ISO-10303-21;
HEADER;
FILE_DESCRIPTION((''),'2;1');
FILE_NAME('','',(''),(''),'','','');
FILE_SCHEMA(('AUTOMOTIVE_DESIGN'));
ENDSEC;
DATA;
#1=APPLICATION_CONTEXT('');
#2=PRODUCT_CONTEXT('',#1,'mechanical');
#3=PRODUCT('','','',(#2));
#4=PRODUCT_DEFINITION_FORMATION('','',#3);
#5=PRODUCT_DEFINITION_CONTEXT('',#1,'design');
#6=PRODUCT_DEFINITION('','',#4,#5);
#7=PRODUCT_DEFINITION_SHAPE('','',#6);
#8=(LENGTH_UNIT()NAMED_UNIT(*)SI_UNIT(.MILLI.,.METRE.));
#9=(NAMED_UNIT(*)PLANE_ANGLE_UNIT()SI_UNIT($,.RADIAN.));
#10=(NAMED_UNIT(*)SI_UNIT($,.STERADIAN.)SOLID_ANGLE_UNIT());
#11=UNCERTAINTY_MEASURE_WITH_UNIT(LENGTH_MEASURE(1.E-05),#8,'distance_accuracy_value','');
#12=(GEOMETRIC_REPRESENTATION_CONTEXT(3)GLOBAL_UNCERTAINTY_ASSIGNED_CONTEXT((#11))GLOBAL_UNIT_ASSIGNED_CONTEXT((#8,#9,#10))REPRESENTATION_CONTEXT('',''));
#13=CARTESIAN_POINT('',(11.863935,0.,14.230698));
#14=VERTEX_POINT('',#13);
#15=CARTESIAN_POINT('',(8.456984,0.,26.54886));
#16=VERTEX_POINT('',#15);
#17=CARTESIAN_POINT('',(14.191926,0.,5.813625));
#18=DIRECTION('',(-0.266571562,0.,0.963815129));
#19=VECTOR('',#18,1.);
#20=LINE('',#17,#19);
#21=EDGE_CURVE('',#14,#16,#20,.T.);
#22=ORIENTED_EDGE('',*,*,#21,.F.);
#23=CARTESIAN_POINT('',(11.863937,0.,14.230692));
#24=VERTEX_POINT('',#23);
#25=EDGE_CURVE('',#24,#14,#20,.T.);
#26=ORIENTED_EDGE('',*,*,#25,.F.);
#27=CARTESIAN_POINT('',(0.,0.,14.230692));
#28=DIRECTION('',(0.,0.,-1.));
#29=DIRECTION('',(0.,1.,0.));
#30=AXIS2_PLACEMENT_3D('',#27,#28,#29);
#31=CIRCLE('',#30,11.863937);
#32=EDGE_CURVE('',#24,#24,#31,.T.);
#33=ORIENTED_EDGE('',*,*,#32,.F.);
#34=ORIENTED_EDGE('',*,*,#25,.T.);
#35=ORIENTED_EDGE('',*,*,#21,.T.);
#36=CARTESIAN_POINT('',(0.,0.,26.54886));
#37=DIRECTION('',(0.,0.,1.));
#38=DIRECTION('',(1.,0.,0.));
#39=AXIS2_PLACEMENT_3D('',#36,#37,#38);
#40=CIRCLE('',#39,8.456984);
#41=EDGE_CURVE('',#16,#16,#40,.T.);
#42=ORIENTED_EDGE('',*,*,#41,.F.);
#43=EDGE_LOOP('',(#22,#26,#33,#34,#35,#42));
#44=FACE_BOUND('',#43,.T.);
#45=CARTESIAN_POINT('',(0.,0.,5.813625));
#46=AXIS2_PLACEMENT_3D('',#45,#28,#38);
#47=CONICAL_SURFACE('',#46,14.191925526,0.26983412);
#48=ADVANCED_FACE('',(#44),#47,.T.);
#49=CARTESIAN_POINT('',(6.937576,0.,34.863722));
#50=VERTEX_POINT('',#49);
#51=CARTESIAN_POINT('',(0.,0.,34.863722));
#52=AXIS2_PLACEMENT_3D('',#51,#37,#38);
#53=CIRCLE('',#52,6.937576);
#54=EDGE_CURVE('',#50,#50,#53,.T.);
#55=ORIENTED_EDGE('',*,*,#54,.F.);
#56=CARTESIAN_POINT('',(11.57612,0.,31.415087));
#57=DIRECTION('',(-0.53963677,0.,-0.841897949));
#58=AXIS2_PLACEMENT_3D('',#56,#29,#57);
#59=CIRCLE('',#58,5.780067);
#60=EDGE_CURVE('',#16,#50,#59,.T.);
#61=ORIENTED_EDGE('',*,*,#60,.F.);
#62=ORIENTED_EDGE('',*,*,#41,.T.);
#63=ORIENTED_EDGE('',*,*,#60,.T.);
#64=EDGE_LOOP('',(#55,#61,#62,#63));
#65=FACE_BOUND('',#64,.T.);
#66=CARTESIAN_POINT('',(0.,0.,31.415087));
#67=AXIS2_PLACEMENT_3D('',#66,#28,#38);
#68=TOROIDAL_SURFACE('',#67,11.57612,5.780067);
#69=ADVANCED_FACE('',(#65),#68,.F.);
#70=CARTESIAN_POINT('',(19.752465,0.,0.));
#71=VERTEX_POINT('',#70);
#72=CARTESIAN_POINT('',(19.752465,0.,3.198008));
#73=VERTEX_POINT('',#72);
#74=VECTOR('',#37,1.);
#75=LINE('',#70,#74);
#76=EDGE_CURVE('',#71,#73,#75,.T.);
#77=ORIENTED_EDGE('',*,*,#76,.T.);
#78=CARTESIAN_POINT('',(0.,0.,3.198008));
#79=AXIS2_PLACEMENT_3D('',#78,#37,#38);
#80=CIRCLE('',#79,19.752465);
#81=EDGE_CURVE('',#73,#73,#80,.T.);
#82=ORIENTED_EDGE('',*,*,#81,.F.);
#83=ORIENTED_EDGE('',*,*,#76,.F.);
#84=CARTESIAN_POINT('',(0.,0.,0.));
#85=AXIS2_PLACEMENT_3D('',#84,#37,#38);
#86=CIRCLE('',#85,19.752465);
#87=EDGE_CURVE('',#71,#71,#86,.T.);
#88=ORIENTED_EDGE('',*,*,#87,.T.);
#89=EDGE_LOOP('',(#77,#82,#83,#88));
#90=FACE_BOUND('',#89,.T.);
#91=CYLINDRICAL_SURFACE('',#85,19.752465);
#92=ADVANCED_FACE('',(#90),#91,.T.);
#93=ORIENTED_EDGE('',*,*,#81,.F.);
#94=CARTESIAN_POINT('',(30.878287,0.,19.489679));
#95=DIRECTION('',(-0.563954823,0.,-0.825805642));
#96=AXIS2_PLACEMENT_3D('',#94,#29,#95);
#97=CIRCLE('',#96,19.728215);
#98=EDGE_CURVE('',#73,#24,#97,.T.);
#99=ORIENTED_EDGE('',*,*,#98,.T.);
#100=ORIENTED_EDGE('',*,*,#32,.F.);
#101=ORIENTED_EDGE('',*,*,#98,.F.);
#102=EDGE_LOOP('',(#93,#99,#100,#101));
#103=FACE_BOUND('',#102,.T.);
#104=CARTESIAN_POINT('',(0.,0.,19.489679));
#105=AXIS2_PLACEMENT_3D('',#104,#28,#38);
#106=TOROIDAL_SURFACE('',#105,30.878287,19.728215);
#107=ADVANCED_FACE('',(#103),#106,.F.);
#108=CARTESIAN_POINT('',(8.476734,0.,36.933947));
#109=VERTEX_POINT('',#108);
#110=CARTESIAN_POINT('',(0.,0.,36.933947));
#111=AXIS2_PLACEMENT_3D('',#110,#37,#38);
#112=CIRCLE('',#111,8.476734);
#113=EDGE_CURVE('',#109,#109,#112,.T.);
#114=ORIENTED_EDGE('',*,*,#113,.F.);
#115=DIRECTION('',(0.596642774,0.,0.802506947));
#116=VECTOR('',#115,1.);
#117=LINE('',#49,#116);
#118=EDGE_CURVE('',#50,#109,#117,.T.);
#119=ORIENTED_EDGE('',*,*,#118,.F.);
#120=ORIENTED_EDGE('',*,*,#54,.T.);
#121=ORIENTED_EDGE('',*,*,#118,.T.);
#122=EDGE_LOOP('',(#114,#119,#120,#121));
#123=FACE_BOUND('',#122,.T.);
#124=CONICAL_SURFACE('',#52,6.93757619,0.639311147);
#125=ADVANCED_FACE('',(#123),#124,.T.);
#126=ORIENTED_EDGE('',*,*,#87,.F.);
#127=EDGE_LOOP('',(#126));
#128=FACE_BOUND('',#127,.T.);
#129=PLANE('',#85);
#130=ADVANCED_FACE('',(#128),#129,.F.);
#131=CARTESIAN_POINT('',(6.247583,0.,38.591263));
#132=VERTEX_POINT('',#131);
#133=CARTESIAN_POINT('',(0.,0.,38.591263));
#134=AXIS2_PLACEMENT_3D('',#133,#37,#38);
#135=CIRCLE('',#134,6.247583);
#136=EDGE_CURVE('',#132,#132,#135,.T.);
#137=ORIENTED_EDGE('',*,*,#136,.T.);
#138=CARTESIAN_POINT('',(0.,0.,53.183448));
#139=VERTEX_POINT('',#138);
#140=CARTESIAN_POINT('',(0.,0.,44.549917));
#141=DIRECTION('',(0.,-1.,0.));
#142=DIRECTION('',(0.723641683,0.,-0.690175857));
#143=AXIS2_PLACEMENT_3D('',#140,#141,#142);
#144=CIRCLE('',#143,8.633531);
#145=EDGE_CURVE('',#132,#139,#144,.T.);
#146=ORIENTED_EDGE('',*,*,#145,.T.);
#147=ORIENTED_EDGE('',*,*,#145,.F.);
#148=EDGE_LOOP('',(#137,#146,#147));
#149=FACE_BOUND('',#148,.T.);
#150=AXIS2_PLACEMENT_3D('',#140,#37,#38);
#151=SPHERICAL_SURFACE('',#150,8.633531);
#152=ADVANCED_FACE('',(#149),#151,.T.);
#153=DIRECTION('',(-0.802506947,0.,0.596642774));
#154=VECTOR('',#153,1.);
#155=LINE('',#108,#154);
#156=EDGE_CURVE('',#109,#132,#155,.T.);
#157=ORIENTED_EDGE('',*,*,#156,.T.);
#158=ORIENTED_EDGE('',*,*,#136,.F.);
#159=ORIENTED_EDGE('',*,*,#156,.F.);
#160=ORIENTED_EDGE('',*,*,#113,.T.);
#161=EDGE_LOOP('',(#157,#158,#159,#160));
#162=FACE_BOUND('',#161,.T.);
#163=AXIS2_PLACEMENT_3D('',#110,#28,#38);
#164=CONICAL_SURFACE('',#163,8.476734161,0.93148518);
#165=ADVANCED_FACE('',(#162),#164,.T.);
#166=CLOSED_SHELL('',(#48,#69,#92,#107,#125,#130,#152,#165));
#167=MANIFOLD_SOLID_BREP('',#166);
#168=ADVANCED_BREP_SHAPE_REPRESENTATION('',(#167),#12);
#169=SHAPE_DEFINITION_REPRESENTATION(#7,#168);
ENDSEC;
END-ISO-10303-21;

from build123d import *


# Not quite as in the source:
# - a fillet or chamfer that OpenCascade refuses, or shapes differently, is made with other operations: its cross-section is extruded or revolved along the edge and cut away or added


with BuildPart() as f1:
    # F0 (on Front) → F1 (revolve)
    with BuildSketch(Plane.XZ):
        with BuildLine():
            Line((0, 38.5912625485), (0, 0))
            Line((0, 0), (19.7524651885, 0))
            Line((19.7524651885, 0), (19.7524651885, 3.1980082858))
            Line((19.7524651885, 3.1980082858), (14.1919255257, 5.8136251755))
            Line((14.1919255257, 5.8136251755), (8.4569835516, 26.5488596043))
            ThreePointArc((8.4569835516, 26.5488596043), (5.8902046524, 30.3760769017), (6.9375761897, 34.8637220549))
            Line((6.9375761897, 34.8637220549), (8.4767341614, 36.9339473546))
            Line((8.4767341614, 36.9339473546), (6.2475829585, 38.5912625485))
            ThreePointArc((6.2475829585, 38.5912625485), (7.9366897799, 47.9479775999), (0, 53.183448328))
            Line((0, 53.183448328), (0, 38.5912625485))
        make_face()
    revolve(axis=Axis((0, 0, 19.2956312742), (0, 0, 1)))

    # F2: fillet of radius 19.7282149364 on 1 edges, made by hand

    # F2_s1 → F2_t2 (revolve)
    with BuildSketch(Plane.XZ):
        with BuildLine():
            ThreePointArc((19.7524651885, 3.1980082858), (14.8303095618, 8.0151476836), (11.8639351327, 14.2306984022))
            Line((11.8639351327, 14.2306984022), (11.4836480923, 14.1255187807))
            Line((11.4836480923, 14.1255187807), (13.8116384853, 5.708445554))
            Line((13.8116384853, 5.708445554), (14.0239794459, 5.4565886226))
            ThreePointArc((14.0239794459, 5.4565886226), (16.8042492773, 4.1487801778), (19.5299487493, 2.872174862))
            Line((19.5299487493, 2.872174862), (19.7524651885, 3.1980082858))
        make_face()
    revolve(axis=Axis((0, 0, 5.8136251755), (0, 0, 1)))


solid = f1.part
